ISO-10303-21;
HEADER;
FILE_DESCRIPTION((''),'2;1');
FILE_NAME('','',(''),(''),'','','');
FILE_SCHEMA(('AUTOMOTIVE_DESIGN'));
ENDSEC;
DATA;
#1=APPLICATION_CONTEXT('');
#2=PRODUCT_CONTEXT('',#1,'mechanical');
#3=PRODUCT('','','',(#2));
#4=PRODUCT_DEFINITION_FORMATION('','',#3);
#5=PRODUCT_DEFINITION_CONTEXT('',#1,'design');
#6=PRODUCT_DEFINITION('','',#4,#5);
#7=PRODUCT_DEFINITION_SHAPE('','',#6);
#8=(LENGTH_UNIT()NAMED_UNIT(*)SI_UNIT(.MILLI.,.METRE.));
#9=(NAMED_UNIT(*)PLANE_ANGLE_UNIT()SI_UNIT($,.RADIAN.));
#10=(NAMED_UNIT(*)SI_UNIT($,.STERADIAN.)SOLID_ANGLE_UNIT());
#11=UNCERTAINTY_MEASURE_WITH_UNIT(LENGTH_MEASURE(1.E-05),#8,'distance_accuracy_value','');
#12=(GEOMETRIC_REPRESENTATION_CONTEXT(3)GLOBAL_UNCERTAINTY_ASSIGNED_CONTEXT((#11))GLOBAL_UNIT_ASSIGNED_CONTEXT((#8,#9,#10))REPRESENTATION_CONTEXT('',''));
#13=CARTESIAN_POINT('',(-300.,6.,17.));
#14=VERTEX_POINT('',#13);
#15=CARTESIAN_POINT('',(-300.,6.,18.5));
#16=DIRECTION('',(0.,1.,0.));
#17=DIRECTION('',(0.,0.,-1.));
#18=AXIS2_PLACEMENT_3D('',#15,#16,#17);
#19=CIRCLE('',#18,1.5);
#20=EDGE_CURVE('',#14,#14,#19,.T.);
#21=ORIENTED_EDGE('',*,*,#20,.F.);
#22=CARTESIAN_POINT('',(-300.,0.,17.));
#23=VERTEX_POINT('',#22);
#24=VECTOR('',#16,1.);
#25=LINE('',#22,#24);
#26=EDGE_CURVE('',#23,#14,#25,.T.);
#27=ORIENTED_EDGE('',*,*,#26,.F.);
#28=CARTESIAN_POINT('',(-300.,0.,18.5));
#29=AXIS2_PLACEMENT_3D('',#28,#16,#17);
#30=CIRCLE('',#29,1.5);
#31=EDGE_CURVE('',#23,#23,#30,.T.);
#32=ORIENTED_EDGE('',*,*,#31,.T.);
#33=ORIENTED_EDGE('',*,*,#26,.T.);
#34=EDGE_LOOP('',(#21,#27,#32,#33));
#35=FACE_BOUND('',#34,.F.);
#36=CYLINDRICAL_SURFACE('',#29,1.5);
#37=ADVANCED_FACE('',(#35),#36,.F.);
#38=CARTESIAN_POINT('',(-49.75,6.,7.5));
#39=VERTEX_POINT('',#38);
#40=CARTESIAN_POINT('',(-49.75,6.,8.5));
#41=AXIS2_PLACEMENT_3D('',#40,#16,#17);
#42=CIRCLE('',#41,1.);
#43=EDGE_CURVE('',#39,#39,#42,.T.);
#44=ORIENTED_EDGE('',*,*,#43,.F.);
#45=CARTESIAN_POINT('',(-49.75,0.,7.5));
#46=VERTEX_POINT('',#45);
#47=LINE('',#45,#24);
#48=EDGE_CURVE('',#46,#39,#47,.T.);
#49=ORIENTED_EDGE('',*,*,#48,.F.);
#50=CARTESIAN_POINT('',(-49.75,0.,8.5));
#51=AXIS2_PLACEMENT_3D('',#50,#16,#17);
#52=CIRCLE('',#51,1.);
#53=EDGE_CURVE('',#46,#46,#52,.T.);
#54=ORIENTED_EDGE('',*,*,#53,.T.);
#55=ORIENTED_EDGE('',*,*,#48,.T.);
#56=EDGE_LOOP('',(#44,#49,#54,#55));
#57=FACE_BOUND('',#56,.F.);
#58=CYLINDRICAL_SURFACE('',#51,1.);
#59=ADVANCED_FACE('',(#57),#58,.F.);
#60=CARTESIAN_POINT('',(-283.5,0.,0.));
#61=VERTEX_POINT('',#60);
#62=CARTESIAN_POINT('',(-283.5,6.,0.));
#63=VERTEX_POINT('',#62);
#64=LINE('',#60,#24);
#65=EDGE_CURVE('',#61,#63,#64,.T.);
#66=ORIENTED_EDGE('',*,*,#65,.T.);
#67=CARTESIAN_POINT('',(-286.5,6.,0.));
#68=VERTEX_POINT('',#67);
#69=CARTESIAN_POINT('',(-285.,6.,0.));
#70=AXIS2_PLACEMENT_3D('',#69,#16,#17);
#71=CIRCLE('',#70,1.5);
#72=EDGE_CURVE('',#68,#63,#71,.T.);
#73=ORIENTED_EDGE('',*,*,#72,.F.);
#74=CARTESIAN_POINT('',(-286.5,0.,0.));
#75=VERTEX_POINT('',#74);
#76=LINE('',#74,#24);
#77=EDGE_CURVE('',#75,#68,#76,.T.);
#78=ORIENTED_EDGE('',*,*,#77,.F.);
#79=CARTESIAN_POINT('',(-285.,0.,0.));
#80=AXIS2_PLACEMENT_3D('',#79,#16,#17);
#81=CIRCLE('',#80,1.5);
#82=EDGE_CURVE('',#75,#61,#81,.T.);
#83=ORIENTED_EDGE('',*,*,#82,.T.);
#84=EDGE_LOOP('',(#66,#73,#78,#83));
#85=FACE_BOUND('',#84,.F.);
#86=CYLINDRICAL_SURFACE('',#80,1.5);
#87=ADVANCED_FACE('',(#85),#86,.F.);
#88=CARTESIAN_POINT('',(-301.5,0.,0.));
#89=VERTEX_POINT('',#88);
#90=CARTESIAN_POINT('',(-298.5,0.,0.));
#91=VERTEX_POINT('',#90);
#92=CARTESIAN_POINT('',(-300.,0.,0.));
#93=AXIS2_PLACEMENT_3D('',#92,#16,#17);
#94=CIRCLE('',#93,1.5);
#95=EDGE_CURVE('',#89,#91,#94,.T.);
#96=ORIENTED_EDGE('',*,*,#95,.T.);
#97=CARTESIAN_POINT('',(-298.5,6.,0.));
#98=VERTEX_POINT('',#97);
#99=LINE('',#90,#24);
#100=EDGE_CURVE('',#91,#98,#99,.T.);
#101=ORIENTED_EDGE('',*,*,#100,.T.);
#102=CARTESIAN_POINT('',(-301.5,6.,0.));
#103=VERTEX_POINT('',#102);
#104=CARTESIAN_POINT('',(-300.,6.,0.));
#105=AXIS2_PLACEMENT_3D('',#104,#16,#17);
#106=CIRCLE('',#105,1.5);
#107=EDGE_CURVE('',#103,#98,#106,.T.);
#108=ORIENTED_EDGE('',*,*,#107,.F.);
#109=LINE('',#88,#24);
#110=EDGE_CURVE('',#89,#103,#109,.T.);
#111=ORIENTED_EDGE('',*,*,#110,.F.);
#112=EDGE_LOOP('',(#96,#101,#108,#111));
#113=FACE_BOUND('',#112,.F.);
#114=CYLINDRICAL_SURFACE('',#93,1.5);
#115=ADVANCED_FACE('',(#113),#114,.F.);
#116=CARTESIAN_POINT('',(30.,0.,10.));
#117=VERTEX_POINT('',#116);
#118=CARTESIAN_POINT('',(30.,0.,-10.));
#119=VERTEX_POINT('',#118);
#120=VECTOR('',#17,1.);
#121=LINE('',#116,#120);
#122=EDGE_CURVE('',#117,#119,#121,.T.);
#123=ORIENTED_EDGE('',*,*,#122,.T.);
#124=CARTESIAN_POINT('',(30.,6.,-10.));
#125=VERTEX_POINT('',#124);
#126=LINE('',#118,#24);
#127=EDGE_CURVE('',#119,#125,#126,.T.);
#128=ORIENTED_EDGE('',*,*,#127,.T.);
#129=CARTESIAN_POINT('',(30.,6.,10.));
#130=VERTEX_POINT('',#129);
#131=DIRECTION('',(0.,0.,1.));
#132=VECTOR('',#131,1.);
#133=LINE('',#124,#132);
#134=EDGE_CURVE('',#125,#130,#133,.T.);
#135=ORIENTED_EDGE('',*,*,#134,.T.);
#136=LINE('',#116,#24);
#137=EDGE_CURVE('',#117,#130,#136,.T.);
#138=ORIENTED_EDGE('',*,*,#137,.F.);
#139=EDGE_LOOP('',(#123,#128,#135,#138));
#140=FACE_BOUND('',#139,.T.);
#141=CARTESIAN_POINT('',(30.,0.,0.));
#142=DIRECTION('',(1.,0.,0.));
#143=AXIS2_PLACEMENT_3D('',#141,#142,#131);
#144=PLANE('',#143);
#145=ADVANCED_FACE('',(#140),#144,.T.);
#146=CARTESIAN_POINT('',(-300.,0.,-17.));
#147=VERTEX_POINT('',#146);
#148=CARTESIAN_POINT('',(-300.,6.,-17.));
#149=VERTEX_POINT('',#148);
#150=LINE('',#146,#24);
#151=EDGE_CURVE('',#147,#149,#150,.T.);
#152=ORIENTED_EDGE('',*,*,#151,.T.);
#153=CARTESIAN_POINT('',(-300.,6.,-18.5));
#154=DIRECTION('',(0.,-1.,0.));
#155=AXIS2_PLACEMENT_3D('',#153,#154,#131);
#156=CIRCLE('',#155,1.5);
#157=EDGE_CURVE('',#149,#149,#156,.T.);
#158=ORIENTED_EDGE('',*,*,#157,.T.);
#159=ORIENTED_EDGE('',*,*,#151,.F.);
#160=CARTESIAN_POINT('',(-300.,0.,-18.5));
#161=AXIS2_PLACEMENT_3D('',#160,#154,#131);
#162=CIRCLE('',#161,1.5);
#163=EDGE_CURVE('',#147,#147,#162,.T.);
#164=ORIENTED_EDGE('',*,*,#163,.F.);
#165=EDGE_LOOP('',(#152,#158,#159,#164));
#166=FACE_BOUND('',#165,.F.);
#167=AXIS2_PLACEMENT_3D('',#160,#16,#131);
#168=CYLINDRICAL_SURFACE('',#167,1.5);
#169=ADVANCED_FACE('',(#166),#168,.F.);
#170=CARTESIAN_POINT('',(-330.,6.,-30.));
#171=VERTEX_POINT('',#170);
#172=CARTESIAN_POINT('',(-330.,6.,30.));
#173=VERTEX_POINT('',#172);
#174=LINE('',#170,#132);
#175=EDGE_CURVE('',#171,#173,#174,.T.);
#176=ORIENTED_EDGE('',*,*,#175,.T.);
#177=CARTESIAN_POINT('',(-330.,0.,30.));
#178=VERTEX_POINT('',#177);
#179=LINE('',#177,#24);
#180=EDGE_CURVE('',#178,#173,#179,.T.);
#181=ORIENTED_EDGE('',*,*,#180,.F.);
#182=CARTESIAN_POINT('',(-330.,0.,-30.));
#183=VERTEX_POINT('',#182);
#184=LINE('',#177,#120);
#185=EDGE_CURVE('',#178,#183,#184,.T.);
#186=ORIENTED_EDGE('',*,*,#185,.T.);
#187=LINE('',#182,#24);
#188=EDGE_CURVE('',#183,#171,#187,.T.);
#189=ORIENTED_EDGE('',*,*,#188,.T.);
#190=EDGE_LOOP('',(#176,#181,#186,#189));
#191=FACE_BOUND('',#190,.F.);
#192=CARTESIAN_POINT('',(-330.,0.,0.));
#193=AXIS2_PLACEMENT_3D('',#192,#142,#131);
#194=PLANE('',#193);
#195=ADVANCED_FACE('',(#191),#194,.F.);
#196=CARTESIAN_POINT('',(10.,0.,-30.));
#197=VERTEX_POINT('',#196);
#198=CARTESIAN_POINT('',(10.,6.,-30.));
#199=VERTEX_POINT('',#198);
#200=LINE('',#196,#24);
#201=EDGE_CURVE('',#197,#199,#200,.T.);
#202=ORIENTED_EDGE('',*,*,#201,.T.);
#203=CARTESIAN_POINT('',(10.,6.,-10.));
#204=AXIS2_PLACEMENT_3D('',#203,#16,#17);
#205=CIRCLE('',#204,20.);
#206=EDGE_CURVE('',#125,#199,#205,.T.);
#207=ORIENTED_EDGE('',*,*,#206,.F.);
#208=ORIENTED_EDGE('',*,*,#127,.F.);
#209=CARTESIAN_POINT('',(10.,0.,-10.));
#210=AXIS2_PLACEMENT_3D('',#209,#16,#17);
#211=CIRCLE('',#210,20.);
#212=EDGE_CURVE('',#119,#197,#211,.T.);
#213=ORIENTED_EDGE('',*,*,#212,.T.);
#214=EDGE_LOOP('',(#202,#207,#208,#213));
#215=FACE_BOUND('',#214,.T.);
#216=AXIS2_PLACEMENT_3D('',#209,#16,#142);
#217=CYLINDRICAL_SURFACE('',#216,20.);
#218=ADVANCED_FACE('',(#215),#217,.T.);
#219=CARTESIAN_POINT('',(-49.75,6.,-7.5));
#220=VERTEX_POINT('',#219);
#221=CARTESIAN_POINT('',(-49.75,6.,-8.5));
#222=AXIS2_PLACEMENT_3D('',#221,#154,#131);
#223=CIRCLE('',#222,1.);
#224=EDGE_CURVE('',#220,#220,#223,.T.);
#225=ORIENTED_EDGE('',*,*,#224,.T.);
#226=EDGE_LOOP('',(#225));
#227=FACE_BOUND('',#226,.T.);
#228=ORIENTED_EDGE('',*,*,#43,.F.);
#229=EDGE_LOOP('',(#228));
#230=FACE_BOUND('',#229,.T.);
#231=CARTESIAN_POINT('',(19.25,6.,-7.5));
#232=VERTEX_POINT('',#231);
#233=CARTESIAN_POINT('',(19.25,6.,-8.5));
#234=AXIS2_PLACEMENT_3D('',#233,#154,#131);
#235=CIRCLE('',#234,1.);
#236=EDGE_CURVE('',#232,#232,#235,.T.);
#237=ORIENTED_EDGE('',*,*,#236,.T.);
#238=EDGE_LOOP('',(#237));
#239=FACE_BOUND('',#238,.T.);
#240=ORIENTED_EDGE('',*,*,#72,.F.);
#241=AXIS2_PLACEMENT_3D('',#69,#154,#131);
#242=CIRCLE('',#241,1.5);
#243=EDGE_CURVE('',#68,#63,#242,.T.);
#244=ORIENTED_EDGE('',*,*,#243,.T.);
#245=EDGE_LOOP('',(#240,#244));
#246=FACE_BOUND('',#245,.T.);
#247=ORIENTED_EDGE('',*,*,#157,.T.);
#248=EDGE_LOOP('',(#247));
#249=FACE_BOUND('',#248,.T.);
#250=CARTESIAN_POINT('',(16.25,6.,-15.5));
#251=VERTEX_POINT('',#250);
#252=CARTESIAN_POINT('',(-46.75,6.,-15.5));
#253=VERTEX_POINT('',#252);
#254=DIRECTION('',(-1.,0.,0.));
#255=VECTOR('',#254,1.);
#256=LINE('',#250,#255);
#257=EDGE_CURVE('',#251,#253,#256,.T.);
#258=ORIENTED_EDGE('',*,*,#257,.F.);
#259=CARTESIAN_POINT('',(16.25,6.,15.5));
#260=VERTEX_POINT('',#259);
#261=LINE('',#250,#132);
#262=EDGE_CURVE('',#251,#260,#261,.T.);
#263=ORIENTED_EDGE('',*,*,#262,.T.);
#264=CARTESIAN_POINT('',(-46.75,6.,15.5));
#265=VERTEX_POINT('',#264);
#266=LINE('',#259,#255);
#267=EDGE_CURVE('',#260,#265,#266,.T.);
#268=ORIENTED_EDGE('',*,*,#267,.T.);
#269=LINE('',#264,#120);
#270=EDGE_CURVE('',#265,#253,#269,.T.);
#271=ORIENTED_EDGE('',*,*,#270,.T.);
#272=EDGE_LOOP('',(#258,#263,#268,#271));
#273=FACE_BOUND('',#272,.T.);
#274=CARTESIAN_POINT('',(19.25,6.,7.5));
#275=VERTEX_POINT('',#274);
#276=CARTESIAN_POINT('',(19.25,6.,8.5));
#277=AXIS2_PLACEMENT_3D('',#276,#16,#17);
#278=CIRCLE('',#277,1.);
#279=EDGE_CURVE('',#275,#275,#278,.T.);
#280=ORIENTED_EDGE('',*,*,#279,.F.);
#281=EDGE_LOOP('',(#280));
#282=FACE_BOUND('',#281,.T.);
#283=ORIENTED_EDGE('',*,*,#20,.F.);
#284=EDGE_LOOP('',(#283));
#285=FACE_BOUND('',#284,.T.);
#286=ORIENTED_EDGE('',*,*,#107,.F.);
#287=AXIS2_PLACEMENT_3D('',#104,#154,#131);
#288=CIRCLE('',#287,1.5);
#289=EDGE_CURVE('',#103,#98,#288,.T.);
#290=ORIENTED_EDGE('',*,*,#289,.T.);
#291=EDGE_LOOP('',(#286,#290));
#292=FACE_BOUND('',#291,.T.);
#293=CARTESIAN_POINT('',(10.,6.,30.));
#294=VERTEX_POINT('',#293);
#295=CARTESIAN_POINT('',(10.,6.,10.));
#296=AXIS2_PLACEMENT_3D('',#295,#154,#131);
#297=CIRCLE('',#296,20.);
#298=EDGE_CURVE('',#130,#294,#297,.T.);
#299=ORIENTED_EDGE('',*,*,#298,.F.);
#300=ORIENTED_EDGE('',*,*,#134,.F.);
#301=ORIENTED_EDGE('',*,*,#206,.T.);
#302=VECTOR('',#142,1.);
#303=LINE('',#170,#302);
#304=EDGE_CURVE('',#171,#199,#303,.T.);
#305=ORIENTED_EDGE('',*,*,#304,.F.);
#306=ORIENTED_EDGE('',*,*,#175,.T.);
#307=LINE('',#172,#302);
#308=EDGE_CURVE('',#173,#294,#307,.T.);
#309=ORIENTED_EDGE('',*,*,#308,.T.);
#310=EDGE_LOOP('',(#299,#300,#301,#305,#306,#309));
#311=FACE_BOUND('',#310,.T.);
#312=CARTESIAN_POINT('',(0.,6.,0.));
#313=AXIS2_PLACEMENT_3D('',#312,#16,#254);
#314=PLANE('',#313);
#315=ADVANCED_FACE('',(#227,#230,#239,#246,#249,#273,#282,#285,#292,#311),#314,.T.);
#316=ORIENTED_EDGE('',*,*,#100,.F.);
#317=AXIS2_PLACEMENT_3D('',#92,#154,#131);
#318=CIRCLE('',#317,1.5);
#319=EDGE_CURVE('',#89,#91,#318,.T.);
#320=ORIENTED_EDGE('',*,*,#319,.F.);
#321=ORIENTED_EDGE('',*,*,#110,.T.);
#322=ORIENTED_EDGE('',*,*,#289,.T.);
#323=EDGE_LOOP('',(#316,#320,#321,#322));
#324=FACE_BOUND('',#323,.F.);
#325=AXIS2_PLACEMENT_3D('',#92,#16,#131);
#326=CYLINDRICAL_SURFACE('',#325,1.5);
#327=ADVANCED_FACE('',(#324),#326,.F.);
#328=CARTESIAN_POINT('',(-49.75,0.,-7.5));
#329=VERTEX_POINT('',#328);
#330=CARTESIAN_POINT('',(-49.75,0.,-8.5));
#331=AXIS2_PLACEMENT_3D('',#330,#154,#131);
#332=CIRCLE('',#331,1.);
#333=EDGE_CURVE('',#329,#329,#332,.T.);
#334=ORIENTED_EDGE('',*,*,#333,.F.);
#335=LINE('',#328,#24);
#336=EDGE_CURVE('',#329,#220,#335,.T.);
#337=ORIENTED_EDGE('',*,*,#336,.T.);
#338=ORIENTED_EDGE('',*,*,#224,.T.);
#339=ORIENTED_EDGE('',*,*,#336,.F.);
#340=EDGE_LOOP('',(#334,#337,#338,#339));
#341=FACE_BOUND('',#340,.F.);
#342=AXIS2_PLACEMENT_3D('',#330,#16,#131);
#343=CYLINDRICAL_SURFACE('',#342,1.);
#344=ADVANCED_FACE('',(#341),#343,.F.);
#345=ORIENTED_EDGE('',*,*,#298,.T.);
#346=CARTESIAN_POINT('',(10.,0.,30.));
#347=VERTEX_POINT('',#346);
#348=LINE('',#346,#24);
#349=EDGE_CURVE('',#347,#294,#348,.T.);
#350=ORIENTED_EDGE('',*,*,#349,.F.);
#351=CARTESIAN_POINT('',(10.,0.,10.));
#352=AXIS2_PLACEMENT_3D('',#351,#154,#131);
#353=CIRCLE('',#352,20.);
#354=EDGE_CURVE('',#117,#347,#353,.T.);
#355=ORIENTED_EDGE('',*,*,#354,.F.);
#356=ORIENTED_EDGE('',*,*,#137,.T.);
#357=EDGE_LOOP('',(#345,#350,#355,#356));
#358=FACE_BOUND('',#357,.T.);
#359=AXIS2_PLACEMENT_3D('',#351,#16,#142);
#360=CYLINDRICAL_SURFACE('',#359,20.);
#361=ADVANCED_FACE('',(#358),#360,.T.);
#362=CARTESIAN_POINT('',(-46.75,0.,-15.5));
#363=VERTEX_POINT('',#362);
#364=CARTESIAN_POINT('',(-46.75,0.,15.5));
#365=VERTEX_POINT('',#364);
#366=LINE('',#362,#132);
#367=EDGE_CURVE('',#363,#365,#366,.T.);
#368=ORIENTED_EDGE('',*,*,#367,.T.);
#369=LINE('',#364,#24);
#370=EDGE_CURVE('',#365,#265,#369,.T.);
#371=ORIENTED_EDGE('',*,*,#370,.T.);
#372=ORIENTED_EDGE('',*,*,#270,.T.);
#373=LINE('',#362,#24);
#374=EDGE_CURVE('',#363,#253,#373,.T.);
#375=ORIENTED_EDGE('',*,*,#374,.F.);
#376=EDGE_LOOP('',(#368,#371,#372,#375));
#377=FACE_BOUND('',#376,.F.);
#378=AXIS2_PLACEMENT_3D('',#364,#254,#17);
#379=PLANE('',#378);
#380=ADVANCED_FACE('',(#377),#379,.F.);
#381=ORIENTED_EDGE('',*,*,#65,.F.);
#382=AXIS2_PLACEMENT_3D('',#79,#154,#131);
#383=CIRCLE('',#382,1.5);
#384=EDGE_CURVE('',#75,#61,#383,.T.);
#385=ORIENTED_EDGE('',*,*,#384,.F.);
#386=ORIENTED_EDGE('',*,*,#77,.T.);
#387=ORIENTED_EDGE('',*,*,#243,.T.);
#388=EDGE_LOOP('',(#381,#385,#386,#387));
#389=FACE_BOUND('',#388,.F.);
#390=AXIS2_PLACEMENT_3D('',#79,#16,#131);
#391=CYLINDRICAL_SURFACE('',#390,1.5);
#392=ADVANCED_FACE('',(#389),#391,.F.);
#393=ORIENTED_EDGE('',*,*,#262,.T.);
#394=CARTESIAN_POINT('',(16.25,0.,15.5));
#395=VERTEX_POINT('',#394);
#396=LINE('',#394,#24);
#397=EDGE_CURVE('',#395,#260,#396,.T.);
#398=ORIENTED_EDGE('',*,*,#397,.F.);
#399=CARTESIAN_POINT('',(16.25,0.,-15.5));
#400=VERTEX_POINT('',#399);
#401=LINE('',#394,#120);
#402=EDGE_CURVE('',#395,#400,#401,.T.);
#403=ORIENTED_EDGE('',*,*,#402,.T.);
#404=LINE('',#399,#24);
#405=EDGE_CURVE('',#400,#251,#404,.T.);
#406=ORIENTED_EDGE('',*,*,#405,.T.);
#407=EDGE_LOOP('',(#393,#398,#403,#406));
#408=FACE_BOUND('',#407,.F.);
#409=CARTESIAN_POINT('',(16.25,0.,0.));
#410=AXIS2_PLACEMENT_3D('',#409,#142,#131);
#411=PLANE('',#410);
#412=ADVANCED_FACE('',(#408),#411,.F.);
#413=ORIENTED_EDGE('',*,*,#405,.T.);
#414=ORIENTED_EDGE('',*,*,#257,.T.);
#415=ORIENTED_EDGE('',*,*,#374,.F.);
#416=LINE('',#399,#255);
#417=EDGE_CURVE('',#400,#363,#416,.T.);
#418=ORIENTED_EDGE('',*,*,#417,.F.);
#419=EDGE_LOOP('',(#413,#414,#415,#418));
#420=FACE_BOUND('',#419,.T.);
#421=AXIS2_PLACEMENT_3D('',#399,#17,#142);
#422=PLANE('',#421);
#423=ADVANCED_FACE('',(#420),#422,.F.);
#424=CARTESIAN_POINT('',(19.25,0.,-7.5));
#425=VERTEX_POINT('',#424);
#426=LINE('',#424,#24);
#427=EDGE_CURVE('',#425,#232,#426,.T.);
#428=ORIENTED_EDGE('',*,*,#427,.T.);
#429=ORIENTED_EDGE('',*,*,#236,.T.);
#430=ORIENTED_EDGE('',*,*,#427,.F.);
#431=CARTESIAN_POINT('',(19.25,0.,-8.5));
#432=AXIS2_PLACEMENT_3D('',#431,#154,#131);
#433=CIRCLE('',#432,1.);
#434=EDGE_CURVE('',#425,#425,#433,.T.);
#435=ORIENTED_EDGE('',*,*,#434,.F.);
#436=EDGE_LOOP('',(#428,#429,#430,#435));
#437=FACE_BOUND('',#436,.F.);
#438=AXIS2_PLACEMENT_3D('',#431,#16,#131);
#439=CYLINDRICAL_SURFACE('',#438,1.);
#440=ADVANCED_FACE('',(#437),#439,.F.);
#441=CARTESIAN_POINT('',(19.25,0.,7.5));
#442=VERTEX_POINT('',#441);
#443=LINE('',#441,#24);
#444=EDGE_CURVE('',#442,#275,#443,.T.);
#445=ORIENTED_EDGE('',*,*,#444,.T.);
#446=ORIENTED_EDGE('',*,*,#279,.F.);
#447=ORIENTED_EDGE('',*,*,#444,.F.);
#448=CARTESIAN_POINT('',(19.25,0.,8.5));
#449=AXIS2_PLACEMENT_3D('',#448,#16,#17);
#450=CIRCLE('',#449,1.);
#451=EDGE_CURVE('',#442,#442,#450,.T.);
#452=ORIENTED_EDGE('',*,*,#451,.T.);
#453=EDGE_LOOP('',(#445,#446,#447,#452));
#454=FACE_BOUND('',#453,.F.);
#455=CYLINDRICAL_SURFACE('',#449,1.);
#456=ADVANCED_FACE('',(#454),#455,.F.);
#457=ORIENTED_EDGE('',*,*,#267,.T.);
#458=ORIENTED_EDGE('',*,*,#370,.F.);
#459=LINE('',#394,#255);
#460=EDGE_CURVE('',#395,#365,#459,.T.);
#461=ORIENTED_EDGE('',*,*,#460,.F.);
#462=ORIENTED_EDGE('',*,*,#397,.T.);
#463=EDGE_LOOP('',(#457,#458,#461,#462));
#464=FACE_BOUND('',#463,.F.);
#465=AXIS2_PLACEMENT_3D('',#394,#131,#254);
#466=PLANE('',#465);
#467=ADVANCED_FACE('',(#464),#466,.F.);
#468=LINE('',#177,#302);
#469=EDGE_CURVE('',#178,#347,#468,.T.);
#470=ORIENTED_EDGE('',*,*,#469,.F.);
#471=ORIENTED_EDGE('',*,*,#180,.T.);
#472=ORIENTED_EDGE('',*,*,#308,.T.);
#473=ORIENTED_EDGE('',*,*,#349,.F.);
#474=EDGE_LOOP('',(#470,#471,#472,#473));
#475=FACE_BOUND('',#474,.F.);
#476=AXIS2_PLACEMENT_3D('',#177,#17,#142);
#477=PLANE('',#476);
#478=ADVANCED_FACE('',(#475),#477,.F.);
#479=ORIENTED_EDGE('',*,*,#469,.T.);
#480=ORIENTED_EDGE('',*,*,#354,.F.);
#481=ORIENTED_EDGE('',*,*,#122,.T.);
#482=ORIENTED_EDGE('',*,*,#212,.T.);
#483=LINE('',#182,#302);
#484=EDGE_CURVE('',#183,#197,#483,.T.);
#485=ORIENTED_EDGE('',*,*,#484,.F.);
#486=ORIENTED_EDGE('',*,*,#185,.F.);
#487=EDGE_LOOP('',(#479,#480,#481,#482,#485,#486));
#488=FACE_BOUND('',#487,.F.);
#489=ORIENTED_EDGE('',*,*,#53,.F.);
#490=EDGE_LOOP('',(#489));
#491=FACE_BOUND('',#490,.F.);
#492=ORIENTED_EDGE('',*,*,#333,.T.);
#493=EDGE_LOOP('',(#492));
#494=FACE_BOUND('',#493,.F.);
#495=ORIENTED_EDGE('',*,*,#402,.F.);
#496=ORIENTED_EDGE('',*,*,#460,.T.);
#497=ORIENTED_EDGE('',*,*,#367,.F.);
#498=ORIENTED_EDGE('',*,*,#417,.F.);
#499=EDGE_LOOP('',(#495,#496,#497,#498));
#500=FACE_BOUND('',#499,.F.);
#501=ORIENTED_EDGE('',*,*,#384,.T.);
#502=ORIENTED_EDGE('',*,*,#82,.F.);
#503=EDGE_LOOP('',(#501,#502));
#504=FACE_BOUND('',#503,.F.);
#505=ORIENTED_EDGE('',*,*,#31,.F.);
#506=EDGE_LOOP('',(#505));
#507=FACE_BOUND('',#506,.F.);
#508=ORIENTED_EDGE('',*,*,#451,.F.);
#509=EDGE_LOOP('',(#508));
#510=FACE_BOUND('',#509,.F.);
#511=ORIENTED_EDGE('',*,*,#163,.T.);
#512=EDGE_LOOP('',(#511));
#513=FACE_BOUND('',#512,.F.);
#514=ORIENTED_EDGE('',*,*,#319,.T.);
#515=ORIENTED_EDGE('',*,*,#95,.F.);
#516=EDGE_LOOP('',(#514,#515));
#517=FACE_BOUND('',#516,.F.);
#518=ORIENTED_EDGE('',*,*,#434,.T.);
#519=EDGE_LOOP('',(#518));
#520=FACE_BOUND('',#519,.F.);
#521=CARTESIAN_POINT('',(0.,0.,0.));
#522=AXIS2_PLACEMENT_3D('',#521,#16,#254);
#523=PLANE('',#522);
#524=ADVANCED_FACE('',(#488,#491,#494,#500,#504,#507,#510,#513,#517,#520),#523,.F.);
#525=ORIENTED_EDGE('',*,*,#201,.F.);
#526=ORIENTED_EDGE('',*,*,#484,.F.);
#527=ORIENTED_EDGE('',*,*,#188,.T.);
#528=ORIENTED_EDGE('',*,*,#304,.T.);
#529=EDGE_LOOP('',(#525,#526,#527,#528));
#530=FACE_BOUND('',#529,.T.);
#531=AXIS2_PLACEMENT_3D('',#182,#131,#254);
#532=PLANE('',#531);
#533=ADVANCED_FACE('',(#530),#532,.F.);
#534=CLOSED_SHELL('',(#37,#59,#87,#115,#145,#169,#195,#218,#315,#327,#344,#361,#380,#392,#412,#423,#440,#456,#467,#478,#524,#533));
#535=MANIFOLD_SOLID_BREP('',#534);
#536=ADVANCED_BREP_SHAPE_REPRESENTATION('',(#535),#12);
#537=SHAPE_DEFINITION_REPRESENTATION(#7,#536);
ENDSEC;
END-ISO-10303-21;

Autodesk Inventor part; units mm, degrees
ref_plane "YZ Plane" through (0, 0, 0) normal (1, 0, 0) x (0, 1, 0)
ref_plane "XZ Plane" through (0, 0, 0) normal (0, 1, 0) x (-1, 0, 0)
ref_plane "XY Plane" through (0, 0, 0) normal (0, 0, 1) x (1, 0, 0)
sketch "Sketch1" plane through (0, 0, 0) normal (0, 1, 0) x (-1, 0, 0)
  line L0 (0, 0) -> (-16.25, 0)
  line L1 (0, 0) -> (46.75, 0)
  line L2 (300, 0) -> (330, 0)
  line L3 (330, 30) -> (-30, 30)
  line L4 (-16.25, 15.5) -> (46.75, 15.5)
  line L5 (46.75, 15.5) -> (46.75, 0)
  line L6 (46.75, -15.5) -> (-16.25, -15.5)
  line L7 (-16.25, -15.5) -> (-16.25, 0)
  line L8 (-16.25, 15.5) -> (46.75, -15.5) construction
  line L9 (46.75, 15.5) -> (-16.25, -15.5) construction
  line L10 (-19.25, 8.5) -> (49.75, 8.5) construction
  line L11 (49.75, 8.5) -> (49.75, -8.5) construction
  line L12 (49.75, -8.5) -> (-19.25, -8.5) construction
  line L13 (-19.25, -8.5) -> (-19.25, 8.5) construction
  line L14 (-19.25, 8.5) -> (49.75, -8.5) construction
  line L15 (49.75, 8.5) -> (-19.25, -8.5) construction
  line L16 (-30, 0) -> (-30, 30)
  line L17 (330, 0) -> (330, 30)
  line L18 (46.75, 0) -> (300, 0)
  line L19 (46.75, 0) -> (46.75, -15.5)
  line L20 (-16.25, 0) -> (-30, 0)
  line L21 (-16.25, 0) -> (-16.25, 15.5)
  line L22 (300, 0) -> (300, 18.5) construction
  line L23 (0, 0) -> (-30, 0) construction
  point P0 (15.25, 0)
  point P1 (15.25, 0)
  point P2 (285, 0)
  dimension "d0" = 300
  dimension "d5" = 63
  dimension "d6" = 31
  dimension "d7" = 69
  dimension "d8" = 17
  dimension "d9" = 16.25
  dimension "d10" = 30
  dimension "d11" = 30
  dimension "d20" = 18.5
  dimension "d21" = 15
extrude "Extrusion1" add sketch "Sketch1" along normal blind 6 contours L20 L16 L3 L17 L2 L18 L5 L4 L21
hole "Hole1" at (19.25, 0, 8.5) at (-49.75, 0, 8.5) direction (0, 1, 0) diameter 2 end through all
hole "Hole2" at (-300, 0, 0) at (-300, 0, 18.5) at (-285, 0, 0) direction (0, 1, 0) diameter 3 end through all
fillet "Fillet1" radius 20 1 edges at (30, 3, 30)
mirror "Mirror1" about plane through (-46.75, 0, 0) normal (0, 0, -1)
properties part number "segment1a" material "Plywood, Finish"
